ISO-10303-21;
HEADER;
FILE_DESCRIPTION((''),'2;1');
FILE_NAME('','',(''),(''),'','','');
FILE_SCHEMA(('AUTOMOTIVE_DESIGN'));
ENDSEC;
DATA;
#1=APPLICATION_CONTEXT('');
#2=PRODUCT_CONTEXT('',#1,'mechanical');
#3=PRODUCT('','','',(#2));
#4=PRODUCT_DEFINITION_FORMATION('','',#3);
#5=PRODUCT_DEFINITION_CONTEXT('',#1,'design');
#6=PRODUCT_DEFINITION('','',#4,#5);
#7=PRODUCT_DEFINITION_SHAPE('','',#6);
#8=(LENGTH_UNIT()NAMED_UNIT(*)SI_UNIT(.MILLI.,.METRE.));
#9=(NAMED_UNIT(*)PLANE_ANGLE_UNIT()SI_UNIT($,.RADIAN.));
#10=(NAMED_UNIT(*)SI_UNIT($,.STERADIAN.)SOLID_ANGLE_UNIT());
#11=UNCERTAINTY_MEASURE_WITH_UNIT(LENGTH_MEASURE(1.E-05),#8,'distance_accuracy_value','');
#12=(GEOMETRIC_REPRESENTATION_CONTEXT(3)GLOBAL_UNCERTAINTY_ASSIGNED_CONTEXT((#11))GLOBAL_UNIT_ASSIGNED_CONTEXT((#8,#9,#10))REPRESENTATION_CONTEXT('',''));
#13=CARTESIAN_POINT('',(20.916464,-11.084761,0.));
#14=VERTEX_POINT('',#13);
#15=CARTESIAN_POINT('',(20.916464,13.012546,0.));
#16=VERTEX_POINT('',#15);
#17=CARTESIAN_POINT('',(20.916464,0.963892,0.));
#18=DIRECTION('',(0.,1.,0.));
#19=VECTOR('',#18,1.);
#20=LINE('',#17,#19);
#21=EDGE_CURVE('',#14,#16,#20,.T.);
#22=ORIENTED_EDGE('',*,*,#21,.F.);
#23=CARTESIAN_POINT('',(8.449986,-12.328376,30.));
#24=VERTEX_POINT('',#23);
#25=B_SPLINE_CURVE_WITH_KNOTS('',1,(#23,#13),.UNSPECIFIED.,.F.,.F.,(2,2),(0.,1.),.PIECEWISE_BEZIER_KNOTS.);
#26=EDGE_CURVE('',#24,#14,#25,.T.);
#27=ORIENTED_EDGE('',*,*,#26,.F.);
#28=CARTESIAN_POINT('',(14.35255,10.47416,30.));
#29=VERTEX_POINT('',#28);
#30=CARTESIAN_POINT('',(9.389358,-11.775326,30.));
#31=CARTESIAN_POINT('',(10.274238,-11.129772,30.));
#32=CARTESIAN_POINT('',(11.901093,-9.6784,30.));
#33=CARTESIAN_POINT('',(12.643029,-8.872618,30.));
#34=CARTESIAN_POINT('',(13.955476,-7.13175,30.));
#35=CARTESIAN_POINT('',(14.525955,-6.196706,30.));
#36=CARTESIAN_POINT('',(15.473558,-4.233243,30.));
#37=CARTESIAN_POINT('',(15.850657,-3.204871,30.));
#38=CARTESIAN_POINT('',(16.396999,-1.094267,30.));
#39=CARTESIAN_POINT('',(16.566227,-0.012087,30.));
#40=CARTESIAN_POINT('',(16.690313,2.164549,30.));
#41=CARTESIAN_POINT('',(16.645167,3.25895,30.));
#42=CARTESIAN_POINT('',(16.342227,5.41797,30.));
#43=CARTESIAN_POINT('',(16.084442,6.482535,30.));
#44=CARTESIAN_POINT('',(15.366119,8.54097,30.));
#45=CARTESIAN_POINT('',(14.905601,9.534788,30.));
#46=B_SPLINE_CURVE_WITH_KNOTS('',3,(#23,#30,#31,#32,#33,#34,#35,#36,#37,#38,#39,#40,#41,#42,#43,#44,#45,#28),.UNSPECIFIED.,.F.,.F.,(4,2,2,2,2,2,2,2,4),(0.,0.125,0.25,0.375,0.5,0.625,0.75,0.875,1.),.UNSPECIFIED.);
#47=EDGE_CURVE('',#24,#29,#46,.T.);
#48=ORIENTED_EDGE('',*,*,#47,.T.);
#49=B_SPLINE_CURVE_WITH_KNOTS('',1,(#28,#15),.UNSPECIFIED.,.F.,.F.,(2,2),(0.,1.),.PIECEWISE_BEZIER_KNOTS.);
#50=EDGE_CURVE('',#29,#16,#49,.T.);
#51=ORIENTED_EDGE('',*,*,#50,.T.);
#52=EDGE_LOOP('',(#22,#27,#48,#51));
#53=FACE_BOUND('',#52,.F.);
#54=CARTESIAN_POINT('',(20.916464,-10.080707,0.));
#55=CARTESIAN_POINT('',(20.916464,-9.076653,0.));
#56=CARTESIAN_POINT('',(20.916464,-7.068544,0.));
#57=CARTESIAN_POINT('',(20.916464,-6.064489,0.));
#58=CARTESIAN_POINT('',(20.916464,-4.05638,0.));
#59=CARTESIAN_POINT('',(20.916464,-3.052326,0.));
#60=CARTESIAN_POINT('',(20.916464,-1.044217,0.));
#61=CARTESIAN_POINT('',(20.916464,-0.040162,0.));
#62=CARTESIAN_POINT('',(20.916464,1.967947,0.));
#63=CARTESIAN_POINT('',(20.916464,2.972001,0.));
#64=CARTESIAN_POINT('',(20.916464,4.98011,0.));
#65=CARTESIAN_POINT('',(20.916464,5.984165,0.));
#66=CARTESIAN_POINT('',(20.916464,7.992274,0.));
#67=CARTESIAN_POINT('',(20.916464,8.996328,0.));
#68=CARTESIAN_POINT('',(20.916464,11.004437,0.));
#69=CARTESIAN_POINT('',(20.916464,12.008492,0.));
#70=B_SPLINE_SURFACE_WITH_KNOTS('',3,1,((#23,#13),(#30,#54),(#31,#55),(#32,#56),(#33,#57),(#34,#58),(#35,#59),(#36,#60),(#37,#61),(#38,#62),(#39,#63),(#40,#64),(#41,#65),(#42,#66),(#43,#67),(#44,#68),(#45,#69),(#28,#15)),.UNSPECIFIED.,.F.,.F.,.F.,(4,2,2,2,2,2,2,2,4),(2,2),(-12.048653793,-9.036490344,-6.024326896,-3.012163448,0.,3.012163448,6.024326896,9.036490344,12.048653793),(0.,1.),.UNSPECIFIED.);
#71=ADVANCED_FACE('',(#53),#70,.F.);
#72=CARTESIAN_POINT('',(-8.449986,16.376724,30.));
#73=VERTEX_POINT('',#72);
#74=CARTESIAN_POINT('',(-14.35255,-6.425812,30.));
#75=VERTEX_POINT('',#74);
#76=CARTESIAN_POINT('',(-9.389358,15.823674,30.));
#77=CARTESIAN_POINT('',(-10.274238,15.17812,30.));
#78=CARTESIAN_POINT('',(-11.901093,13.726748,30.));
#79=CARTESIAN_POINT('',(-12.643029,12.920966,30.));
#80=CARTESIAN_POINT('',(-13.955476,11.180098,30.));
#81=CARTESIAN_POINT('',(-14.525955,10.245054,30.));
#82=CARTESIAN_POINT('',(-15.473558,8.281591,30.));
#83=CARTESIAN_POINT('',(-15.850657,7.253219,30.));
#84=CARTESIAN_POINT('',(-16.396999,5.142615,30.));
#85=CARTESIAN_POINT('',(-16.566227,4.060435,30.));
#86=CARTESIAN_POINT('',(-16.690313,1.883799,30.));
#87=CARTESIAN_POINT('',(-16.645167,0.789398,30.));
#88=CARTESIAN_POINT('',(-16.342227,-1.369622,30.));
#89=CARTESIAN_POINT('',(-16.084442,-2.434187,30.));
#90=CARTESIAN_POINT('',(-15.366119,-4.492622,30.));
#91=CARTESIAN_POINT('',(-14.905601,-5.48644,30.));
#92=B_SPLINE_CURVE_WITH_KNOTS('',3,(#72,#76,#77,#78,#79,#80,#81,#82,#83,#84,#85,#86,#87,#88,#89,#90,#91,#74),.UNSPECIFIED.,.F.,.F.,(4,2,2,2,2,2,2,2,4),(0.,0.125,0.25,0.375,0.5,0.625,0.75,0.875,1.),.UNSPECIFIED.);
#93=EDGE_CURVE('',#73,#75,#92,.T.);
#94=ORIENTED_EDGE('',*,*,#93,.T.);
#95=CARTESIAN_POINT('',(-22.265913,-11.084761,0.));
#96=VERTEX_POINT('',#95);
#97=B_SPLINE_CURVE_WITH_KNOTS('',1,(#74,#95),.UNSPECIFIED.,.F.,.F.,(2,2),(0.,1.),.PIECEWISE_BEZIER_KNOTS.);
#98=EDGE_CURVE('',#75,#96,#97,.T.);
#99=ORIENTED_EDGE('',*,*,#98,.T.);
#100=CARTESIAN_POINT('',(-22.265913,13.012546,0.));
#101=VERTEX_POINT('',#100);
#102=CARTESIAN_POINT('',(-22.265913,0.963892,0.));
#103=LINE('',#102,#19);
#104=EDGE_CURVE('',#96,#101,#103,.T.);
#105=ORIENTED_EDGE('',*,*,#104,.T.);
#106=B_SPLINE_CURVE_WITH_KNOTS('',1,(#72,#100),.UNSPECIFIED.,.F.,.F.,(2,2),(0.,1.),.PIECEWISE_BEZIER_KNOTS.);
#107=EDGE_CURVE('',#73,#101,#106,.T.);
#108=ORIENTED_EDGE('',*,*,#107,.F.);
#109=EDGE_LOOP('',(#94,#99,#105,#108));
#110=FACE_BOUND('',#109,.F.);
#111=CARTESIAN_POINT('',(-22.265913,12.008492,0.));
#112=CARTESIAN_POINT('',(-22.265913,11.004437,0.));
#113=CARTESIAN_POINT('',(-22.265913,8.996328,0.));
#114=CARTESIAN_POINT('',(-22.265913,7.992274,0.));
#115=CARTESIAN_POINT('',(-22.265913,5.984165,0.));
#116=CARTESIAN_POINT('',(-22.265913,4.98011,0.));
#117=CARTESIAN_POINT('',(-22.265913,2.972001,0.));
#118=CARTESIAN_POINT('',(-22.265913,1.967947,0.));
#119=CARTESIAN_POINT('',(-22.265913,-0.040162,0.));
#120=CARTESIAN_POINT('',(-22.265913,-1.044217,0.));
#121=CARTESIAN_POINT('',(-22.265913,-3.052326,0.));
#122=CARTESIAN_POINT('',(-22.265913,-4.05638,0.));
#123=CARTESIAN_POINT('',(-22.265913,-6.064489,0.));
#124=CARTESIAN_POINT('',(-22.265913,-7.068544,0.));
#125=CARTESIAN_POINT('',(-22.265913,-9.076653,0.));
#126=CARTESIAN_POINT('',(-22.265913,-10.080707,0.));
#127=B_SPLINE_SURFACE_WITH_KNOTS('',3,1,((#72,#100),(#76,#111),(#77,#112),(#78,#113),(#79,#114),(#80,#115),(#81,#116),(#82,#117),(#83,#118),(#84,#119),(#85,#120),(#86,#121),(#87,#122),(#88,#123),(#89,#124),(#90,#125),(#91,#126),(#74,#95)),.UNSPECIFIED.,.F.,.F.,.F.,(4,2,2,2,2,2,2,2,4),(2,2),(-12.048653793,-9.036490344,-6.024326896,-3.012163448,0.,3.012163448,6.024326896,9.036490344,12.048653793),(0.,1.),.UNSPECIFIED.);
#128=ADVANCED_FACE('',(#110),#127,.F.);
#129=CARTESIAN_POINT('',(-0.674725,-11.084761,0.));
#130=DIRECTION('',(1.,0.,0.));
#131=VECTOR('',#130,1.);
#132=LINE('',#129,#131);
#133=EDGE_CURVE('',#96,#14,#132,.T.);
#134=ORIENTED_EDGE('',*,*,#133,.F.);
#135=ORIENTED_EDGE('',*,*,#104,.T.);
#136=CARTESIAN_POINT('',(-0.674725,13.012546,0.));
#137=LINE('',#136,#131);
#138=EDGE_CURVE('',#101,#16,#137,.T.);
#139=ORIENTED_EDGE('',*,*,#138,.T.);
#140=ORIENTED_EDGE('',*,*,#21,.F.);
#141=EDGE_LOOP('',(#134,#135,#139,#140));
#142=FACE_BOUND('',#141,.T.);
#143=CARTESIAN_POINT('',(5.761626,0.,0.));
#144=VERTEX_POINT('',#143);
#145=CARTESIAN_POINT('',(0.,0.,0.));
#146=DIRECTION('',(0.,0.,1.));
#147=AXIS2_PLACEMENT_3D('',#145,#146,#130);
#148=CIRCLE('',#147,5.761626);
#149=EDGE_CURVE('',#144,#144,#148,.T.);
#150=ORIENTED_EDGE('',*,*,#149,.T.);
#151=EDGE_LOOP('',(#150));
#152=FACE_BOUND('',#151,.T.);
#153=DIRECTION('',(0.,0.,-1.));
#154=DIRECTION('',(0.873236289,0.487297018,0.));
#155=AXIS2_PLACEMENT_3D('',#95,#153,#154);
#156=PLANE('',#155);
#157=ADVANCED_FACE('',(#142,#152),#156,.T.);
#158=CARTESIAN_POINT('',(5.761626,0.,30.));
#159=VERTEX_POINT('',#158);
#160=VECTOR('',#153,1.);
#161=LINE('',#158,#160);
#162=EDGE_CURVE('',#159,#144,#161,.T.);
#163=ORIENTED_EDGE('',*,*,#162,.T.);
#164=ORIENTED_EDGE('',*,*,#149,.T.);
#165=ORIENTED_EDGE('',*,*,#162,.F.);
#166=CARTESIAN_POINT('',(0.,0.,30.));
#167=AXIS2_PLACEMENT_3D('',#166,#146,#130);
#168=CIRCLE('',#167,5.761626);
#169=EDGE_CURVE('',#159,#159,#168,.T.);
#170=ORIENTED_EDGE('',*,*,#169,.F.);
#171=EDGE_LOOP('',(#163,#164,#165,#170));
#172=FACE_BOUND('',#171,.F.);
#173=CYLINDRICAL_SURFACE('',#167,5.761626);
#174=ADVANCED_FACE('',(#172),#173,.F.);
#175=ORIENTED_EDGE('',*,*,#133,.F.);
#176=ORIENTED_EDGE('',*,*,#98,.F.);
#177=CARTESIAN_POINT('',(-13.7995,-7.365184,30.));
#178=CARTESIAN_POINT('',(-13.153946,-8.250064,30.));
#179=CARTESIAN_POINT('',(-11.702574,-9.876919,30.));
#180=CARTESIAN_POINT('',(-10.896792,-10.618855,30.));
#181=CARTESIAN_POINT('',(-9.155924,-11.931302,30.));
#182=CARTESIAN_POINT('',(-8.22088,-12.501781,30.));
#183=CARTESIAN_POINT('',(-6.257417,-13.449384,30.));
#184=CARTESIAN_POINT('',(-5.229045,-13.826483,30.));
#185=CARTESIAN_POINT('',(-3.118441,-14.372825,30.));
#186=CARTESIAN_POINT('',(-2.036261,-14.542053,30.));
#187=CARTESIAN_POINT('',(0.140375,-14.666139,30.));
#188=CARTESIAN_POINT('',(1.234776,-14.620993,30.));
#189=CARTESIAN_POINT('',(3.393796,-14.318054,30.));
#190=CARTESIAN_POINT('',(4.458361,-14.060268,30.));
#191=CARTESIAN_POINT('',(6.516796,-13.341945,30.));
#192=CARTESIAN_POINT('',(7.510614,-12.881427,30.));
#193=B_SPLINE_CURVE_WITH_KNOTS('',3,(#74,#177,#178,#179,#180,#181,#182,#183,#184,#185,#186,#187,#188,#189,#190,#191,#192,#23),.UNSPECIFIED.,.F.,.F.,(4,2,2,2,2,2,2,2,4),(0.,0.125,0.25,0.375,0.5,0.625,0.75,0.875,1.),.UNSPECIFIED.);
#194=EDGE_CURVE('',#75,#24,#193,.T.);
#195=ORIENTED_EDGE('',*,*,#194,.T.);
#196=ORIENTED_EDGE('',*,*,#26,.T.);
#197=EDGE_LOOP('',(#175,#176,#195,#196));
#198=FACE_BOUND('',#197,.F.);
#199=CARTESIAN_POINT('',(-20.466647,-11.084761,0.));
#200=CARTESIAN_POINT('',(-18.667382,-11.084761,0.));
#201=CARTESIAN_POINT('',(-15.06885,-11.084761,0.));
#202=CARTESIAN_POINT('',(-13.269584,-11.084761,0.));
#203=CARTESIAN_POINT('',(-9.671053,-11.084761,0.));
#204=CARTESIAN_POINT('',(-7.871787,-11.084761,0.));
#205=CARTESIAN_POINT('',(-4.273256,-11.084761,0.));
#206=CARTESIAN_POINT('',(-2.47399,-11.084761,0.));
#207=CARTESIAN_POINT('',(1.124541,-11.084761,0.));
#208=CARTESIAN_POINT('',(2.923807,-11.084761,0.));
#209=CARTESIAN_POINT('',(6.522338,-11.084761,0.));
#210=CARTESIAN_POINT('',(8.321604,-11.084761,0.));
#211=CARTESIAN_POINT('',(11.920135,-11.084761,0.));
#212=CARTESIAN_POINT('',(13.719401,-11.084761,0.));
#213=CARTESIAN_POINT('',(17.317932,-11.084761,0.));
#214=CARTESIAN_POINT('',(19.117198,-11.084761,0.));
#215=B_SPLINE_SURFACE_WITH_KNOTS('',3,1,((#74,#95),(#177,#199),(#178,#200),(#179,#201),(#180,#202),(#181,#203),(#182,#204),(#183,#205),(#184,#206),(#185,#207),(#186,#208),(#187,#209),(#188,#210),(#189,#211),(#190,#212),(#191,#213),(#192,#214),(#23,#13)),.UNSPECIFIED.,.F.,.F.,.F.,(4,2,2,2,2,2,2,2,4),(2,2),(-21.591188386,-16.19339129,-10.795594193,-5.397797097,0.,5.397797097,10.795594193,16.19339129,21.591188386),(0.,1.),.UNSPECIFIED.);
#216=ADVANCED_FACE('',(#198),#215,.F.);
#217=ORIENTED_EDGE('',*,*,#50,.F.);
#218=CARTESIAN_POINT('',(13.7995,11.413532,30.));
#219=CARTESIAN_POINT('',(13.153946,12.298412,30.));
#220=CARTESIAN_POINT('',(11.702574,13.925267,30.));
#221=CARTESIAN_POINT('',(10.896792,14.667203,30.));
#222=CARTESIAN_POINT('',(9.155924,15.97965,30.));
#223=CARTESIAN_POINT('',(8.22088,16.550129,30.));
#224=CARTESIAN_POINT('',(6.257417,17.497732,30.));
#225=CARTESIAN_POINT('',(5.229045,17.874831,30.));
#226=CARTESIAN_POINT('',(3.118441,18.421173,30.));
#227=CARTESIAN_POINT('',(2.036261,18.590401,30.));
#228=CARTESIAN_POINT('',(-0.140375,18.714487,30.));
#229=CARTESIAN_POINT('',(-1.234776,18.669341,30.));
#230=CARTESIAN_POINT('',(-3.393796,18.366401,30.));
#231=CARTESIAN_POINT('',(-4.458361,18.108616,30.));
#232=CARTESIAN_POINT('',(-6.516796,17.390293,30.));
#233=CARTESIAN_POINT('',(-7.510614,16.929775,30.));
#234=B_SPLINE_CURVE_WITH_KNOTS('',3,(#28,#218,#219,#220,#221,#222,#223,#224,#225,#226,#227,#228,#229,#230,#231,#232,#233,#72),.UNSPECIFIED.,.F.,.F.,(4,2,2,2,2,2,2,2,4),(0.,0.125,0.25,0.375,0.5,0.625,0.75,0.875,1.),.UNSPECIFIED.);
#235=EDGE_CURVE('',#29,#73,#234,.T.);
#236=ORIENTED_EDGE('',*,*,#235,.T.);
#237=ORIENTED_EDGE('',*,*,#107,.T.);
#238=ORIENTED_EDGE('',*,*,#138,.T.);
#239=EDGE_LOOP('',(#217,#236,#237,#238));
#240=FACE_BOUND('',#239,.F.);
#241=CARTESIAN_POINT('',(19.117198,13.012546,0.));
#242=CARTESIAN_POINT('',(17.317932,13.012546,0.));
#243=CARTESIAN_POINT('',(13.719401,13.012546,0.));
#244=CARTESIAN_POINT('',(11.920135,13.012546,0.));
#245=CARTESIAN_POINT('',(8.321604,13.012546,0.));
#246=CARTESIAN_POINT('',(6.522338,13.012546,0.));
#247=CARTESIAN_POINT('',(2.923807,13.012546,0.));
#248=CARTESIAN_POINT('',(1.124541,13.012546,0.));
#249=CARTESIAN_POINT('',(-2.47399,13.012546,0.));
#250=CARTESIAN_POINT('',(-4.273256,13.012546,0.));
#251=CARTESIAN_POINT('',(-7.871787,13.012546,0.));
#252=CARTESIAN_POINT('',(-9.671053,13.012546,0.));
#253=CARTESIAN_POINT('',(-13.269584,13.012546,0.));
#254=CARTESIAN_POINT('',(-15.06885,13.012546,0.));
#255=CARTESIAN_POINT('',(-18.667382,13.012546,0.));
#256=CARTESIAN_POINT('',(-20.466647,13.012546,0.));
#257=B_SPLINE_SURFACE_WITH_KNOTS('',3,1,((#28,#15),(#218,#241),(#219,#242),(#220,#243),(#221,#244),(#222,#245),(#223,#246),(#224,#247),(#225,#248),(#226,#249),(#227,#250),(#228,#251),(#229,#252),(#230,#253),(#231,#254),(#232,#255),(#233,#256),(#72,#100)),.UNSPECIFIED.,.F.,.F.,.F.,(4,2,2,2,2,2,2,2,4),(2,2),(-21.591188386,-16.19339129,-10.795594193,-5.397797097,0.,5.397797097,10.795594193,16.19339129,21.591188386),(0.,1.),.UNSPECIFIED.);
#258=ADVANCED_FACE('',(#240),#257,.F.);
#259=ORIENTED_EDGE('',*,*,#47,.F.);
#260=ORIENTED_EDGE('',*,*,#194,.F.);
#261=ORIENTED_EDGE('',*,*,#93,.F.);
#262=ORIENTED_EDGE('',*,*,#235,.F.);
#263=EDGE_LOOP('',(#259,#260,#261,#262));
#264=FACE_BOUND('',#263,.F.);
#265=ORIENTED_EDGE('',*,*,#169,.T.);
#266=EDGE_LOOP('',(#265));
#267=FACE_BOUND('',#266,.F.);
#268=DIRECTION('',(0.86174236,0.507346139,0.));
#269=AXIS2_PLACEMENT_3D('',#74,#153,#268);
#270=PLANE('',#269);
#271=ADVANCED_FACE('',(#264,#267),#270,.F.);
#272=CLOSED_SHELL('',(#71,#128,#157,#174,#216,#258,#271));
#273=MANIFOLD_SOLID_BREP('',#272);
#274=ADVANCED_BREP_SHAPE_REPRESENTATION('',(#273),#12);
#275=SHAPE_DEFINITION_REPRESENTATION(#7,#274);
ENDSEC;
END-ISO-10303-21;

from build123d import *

# Parameters (mm, degrees)
F0_W     = 43.1823767722
F0_H     = 24.0973075852
F4_R     = 5.7616257058
F5_DEPTH = 30


# Not quite as in the source:
# - the arcs of a loft's sections are written as splines that run evenly, so that the points pair up as in the source's solid


with BuildPart() as f3:
    # F2 (on offset) → F3 section 0
    with BuildSketch(Plane.XY.offset(30)):
        with BuildLine():
            add(Edge.make_bspline(
                [(-14.3525502898, -6.4258121346), (-13.7994999926, -7.3651843545), (-13.1539455701, -8.2500639934), (-11.7025735307, -9.8769193643), (-10.8967918018, -10.618854869), (-9.1559237309, -11.9313020315), (-8.2208804354, -12.5017812365), (-6.2574169169, -13.4493835823), (-5.2290452443, -13.8264832918), (-3.1184410799, -14.3728249941), (-2.036260777, -14.5420534776), (0.1403746989, -14.6661389313), (1.2347760501, -14.6209928331), (3.3937959567, -14.3180535037), (4.4583611261, -14.0602677631), (6.5167955393, -13.3419454391), (7.5106138842, -12.8814266176), (8.449986104, -12.3283763204)],
                knots=[0, 0, 0, 0, 0.125, 0.125, 0.25, 0.25, 0.375, 0.375, 0.5, 0.5, 0.625, 0.625, 0.75, 0.75, 0.875, 0.875, 1, 1, 1, 1], degree=3))
            add(Edge.make_bspline(
                [(8.449986104, -12.3283763204), (9.3893583239, -11.7753260232), (10.2742379628, -11.1297716007), (11.9010933337, -9.6783995613), (12.6430288384, -8.8726178324), (13.9554760009, -7.1317497615), (14.5259552059, -6.196706466), (15.4735575517, -4.2332429475), (15.8506572612, -3.2048712749), (16.3969989635, -1.0942671105), (16.566227447, -0.0120868075), (16.6903129007, 2.1645486683), (16.6451668025, 3.2589500195), (16.3422274731, 5.4179699262), (16.0844417325, 6.4825350955), (15.3661194086, 8.5409695087), (14.905600587, 9.5347878536), (14.3525502898, 10.4741600735)],
                knots=[0, 0, 0, 0, 0.125, 0.125, 0.25, 0.25, 0.375, 0.375, 0.5, 0.5, 0.625, 0.625, 0.75, 0.75, 0.875, 0.875, 1, 1, 1, 1], degree=3))
            add(Edge.make_bspline(
                [(14.3525502898, 10.4741600735), (13.7994999926, 11.4135322933), (13.1539455701, 12.2984119322), (11.7025735307, 13.9252673031), (10.8967918018, 14.6672028078), (9.1559237309, 15.9796499703), (8.2208804354, 16.5501291753), (6.2574169169, 17.4977315211), (5.2290452443, 17.8748312306), (3.1184410799, 18.4211729329), (2.036260777, 18.5904014164), (-0.1403746989, 18.7144868701), (-1.2347760501, 18.6693407719), (-3.3937959567, 18.3664014425), (-4.4583611261, 18.108615702), (-6.5167955393, 17.390293378), (-7.5106138842, 16.9297745564), (-8.449986104, 16.3767242592)],
                knots=[0, 0, 0, 0, 0.125, 0.125, 0.25, 0.25, 0.375, 0.375, 0.5, 0.5, 0.625, 0.625, 0.75, 0.75, 0.875, 0.875, 1, 1, 1, 1], degree=3))
            add(Edge.make_bspline(
                [(-8.449986104, 16.3767242592), (-9.3893583239, 15.823673962), (-10.2742379628, 15.1781195395), (-11.9010933337, 13.7267475001), (-12.6430288384, 12.9209657712), (-13.9554760009, 11.1800977003), (-14.5259552059, 10.2450544049), (-15.4735575517, 8.2815908863), (-15.8506572612, 7.2532192137), (-16.3969989635, 5.1426150493), (-16.566227447, 4.0604347464), (-16.6903129007, 1.8837992705), (-16.6451668025, 0.7893979193), (-16.3422274731, -1.3696219873), (-16.0844417325, -2.4341871567), (-15.3661194086, -4.4926215699), (-14.905600587, -5.4864399148), (-14.3525502898, -6.4258121346)],
                knots=[0, 0, 0, 0, 0.125, 0.125, 0.25, 0.25, 0.375, 0.375, 0.5, 0.5, 0.625, 0.625, 0.75, 0.75, 0.875, 0.875, 1, 1, 1, 1], degree=3))
        make_face()
    # F0 (on Top) → F3 section 1
    with BuildSketch(Plane.XY):
        with Locations((-0.6747245789, 0.963892322)):
            Rectangle(F0_W, F0_H)
    loft(ruled=True)

    # F4 (on face) → F5 (cut)
    with BuildSketch(Plane.XY.offset(30)):
        Circle(F4_R)
    extrude(amount=-F5_DEPTH, mode=Mode.SUBTRACT)


solid = f3.part
